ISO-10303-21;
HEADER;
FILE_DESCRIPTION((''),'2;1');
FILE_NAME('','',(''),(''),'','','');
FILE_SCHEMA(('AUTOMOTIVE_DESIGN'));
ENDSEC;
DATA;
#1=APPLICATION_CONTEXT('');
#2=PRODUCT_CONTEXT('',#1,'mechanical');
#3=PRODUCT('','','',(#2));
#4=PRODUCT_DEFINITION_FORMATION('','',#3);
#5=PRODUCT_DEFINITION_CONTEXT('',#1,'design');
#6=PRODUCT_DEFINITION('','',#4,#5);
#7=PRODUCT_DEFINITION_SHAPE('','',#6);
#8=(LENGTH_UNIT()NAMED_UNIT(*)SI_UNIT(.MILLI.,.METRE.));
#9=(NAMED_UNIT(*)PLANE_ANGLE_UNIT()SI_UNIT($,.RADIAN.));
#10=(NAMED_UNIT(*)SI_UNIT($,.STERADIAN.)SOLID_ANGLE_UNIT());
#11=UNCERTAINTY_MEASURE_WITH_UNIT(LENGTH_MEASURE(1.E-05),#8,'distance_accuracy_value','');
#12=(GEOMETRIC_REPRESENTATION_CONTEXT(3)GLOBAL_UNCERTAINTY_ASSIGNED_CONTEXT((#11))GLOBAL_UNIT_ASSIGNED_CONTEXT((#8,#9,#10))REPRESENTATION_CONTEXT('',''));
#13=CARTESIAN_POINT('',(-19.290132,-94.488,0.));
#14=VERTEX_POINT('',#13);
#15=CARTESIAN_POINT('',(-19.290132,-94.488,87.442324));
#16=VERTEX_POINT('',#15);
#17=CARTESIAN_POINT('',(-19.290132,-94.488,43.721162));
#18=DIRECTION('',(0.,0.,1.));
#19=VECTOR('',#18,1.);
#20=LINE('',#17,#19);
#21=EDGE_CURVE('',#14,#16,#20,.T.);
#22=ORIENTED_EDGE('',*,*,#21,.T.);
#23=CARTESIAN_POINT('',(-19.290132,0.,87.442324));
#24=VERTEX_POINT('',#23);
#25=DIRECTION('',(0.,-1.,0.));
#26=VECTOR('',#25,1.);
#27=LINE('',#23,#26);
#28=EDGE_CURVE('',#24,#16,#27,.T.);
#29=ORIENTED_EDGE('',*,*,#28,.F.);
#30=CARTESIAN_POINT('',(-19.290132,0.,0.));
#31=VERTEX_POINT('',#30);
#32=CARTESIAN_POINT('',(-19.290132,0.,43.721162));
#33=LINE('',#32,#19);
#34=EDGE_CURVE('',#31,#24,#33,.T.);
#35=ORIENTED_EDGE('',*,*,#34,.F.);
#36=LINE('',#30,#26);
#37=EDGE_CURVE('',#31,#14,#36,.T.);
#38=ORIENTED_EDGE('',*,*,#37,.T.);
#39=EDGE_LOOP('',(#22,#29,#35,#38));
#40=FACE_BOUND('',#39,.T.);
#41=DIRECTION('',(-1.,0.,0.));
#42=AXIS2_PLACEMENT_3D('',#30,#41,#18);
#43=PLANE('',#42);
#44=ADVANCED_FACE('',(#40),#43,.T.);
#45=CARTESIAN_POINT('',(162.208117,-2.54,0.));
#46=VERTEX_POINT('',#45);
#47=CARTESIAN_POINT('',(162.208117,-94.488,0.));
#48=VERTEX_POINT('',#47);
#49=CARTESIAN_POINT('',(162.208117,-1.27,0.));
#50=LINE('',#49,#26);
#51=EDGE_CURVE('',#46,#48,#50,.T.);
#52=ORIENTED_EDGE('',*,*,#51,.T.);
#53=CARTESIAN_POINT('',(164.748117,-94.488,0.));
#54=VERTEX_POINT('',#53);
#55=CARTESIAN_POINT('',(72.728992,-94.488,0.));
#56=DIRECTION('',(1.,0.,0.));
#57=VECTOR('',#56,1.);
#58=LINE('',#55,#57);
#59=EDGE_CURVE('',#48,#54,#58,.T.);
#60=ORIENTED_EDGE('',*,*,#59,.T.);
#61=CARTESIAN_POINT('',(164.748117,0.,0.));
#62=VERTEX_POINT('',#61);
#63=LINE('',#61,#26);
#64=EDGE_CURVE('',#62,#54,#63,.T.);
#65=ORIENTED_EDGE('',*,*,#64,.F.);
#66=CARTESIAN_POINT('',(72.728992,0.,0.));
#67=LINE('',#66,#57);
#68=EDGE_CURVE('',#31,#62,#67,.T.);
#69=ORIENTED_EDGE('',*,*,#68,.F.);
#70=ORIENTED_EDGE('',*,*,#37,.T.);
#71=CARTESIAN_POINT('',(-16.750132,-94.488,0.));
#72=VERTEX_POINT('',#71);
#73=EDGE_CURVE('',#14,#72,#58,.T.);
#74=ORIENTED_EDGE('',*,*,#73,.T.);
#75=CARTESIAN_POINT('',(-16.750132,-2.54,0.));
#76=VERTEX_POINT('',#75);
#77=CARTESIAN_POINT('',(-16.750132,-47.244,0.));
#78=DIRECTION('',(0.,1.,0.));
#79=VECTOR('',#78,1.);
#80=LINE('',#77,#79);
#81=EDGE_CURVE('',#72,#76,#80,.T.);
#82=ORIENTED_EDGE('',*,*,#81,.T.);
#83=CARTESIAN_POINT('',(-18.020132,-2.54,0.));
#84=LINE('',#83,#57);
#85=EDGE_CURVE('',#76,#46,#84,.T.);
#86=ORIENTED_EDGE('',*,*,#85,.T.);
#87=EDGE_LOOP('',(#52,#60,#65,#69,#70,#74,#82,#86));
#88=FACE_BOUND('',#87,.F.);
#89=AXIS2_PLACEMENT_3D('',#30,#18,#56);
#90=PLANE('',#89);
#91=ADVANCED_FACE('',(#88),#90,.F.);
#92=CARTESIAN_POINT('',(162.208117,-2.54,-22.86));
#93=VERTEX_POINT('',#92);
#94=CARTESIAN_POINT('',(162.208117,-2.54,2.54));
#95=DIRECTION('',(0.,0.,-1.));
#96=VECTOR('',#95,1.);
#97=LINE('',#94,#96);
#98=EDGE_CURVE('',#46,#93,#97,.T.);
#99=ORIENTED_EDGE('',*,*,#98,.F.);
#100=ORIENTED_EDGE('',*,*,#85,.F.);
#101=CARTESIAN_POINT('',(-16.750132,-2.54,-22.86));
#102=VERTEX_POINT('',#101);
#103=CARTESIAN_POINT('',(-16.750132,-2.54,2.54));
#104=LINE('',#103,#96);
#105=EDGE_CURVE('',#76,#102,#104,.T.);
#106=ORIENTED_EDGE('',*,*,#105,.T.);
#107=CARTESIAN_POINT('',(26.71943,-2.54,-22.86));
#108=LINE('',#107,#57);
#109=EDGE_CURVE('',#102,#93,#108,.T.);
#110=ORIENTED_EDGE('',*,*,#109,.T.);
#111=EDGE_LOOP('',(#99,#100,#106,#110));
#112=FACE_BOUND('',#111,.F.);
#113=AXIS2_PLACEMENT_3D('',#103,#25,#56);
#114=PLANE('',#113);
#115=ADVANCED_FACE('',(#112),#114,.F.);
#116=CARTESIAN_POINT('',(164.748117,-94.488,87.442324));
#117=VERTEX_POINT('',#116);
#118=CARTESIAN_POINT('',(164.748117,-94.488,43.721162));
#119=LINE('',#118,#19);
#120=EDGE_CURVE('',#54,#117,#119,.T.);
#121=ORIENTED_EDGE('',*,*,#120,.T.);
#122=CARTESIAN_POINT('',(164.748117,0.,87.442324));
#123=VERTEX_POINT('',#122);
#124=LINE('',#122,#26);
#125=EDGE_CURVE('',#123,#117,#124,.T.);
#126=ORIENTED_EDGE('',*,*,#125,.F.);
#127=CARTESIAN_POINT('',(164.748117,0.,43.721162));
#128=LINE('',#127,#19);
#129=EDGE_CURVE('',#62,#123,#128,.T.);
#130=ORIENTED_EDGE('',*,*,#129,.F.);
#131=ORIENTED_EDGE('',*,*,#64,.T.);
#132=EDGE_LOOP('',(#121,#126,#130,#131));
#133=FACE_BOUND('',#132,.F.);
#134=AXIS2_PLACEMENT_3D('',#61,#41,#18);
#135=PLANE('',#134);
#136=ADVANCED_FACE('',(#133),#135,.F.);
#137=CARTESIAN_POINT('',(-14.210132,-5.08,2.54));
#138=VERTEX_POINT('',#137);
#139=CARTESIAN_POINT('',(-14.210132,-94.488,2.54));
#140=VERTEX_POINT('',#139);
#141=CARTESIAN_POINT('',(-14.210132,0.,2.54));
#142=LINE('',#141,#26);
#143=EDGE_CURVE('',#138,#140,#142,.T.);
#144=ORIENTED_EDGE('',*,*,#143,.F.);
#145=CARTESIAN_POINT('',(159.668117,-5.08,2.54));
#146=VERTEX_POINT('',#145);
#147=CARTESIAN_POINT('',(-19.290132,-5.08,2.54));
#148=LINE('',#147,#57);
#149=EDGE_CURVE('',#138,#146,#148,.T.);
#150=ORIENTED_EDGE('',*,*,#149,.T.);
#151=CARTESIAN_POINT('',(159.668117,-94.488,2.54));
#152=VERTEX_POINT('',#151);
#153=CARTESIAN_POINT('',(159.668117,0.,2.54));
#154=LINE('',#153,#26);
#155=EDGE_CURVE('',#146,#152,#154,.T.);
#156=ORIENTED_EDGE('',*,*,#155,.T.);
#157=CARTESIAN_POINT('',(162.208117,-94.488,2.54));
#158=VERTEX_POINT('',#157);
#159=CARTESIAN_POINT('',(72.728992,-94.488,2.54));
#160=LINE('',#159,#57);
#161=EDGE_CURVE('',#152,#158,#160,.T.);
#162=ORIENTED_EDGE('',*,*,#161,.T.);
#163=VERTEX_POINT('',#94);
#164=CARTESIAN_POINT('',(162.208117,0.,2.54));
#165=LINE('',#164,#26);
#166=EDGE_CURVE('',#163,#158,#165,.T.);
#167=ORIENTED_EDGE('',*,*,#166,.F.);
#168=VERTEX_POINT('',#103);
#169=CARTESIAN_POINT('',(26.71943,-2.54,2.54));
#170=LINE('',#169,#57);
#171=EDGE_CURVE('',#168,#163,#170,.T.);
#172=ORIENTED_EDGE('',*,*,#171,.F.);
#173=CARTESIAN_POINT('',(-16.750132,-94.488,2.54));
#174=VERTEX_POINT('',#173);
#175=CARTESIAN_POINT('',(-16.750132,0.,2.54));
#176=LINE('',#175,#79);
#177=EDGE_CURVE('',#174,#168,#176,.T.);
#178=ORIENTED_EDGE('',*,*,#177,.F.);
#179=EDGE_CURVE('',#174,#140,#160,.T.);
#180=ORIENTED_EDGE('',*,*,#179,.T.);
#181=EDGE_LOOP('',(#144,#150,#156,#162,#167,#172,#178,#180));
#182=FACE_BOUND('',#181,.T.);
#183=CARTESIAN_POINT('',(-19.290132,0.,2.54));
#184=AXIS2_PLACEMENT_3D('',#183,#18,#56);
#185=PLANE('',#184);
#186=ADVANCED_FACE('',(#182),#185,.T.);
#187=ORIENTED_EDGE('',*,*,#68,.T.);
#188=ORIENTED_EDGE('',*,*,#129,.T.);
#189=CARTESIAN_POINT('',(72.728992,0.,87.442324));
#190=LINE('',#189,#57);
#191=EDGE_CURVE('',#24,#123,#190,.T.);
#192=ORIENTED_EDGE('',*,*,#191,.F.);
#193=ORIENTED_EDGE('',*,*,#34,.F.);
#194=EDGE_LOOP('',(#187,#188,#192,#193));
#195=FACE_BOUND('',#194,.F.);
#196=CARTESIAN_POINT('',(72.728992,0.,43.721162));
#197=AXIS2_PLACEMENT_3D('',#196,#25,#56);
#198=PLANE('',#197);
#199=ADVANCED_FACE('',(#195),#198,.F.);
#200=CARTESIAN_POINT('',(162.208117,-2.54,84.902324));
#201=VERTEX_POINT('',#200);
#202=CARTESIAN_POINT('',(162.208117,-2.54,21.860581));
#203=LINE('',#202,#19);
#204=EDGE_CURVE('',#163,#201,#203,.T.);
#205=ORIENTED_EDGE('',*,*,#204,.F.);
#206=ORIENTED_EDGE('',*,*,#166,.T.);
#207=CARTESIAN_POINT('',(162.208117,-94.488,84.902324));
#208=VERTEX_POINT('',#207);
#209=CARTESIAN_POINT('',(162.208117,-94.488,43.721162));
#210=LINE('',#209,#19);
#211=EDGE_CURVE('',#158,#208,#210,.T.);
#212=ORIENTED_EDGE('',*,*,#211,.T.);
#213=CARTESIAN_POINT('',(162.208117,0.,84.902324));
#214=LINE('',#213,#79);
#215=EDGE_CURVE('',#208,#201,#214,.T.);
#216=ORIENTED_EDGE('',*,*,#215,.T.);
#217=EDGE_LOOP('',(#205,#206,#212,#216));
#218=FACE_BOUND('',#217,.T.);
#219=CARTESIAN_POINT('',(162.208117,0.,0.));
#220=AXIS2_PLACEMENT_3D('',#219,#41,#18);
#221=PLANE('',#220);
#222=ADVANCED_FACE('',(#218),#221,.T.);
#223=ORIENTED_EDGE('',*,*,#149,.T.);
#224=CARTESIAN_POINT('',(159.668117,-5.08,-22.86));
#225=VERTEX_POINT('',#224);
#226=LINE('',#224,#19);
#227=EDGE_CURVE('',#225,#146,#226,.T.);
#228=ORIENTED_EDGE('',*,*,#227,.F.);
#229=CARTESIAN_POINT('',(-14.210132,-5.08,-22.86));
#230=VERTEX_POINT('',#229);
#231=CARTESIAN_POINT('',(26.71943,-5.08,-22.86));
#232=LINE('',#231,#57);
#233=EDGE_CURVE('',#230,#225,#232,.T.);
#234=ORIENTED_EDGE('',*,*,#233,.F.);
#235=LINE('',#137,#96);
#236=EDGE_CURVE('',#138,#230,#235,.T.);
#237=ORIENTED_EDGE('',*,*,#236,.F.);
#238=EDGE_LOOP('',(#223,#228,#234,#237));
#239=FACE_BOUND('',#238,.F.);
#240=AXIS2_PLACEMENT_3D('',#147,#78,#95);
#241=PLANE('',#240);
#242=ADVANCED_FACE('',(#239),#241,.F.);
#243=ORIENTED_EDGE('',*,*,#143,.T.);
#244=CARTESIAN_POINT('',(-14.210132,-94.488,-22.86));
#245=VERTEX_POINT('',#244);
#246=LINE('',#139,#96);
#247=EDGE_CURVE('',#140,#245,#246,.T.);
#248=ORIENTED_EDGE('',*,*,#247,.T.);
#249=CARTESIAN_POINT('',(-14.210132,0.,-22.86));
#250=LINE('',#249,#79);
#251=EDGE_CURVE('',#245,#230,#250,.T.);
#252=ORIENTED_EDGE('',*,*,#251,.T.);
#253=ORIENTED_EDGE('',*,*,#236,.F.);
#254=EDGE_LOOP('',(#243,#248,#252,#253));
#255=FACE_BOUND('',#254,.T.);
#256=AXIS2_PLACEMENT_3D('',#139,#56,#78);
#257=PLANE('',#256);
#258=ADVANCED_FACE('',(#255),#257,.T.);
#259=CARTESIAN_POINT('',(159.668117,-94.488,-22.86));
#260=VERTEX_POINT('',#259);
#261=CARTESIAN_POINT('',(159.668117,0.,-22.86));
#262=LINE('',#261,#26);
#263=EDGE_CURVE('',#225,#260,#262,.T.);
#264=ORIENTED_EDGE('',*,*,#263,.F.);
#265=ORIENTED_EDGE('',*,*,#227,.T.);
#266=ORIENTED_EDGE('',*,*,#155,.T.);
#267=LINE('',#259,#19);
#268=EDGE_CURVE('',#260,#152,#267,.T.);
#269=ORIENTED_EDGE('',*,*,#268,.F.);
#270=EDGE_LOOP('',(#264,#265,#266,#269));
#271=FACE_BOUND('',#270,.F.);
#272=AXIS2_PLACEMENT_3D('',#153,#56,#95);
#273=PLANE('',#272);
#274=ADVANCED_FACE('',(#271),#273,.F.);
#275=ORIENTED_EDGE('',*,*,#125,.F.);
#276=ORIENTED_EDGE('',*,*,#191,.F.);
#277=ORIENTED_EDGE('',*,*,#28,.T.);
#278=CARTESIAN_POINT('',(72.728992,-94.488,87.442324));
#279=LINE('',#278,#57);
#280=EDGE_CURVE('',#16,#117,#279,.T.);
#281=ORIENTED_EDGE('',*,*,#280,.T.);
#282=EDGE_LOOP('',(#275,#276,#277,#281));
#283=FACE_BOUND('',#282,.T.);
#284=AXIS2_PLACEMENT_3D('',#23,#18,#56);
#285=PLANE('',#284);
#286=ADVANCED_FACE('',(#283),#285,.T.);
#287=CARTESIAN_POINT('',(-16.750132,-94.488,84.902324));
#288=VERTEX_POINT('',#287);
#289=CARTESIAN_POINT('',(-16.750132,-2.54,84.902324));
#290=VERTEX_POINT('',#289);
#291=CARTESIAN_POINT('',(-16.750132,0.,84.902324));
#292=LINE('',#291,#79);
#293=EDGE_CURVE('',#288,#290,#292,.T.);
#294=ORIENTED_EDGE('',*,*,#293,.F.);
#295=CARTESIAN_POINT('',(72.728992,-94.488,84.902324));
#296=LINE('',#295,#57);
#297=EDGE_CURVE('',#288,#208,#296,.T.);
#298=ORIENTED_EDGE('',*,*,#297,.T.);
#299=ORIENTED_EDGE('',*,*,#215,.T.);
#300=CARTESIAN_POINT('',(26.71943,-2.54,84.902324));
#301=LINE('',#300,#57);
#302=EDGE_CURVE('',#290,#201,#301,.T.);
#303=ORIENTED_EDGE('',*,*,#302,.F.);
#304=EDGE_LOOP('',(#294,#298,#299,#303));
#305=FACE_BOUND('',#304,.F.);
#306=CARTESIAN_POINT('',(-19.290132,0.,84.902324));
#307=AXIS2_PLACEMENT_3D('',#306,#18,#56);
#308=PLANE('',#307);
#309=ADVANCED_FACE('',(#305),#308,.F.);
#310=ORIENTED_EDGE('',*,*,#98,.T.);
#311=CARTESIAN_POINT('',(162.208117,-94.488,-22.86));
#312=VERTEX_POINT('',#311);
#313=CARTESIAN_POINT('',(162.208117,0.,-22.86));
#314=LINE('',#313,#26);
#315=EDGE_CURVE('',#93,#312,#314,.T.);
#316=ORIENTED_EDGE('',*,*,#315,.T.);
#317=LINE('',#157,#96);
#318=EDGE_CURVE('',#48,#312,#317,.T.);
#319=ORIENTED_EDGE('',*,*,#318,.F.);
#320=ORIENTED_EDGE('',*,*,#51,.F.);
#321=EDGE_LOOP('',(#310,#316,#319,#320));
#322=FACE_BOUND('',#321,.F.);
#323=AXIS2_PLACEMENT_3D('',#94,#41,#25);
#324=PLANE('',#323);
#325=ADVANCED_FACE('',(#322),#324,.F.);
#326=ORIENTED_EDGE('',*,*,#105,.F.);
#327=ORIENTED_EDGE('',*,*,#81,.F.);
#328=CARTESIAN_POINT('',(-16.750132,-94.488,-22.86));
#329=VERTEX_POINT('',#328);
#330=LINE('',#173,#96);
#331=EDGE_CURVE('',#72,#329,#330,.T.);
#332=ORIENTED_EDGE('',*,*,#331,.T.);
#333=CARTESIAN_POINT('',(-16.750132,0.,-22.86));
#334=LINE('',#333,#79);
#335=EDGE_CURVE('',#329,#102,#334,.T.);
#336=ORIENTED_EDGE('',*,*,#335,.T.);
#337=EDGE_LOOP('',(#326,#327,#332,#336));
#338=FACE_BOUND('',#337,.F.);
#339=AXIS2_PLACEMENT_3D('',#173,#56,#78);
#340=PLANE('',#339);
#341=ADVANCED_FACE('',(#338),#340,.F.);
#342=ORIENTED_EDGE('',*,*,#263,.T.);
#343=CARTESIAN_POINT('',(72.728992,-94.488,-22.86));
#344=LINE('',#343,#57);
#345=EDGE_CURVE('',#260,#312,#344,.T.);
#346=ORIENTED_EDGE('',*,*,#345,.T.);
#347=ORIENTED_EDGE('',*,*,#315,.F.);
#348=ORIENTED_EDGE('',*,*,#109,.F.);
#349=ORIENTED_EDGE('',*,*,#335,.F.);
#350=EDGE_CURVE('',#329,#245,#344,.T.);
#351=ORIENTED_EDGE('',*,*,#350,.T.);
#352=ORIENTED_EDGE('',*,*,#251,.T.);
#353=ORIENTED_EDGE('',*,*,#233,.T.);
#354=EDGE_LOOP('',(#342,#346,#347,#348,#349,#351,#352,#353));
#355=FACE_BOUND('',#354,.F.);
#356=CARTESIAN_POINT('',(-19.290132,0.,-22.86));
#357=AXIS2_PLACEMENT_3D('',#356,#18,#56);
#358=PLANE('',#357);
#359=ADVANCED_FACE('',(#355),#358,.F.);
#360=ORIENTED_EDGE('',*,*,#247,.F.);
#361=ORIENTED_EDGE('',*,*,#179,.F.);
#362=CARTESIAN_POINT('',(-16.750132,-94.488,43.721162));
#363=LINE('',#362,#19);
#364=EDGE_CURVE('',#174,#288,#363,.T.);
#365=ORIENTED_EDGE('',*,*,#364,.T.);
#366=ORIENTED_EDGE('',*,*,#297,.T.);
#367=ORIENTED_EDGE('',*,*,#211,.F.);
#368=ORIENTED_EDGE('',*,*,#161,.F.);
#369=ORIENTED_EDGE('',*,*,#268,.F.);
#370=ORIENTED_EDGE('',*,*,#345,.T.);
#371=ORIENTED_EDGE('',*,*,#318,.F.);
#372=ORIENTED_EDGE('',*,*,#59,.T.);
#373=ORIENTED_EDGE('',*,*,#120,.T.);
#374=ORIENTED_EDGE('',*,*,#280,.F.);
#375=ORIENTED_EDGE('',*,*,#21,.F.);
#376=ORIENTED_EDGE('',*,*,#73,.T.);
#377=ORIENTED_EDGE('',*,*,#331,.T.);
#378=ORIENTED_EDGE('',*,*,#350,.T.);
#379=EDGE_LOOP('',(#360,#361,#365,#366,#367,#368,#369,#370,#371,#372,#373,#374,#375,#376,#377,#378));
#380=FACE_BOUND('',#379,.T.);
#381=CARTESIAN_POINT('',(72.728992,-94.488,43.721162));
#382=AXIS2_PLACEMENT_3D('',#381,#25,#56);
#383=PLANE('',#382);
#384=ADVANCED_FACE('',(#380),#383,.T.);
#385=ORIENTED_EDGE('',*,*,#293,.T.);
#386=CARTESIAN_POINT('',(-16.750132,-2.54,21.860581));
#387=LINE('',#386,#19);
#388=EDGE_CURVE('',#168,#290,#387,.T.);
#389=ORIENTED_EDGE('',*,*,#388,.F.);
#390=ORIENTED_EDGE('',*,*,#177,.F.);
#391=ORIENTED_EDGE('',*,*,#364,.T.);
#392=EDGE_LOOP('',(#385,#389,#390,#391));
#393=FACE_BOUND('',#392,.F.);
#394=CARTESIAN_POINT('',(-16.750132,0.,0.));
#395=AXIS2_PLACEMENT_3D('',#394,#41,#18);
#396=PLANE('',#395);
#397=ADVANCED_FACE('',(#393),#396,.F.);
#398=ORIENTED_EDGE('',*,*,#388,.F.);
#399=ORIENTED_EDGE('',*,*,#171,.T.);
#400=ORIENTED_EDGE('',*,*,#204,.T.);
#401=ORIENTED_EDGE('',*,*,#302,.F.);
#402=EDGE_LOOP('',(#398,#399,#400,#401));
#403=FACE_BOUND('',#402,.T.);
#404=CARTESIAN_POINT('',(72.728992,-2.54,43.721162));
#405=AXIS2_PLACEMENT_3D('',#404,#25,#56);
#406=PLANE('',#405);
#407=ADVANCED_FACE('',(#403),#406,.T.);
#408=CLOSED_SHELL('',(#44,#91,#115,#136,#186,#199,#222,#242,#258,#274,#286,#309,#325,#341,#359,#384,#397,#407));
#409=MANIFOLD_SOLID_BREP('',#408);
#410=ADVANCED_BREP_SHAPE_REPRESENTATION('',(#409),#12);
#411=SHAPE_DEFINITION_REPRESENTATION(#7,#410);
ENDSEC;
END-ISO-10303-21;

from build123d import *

# Parameters (mm, degrees)
F0_W        = 184.0382497758
F0_H        = 87.4423235655
F1_DEPTH    = 94.488
F2_T        = -2.54
F3_DEPTH    = 25.4
F4_T        = 2.54
F4_T3_DEPTH = 97.028
F4_T5_DEPTH = 184.0382497758
F4_T7_DEPTH = 87.4423235655


# Not quite as in the source:
# - a shell that OpenCascade refuses in one call is made with other operations: the cavity is built on its own and cut out


with BuildPart() as f1:
    # F0 (on Front) → F1 (new body)
    with BuildSketch(Plane.XZ):
        with Locations((72.7289924398, 43.7211617827)):
            Rectangle(F0_W, F0_H)
    extrude(amount=F1_DEPTH)

    # F2
    f2_openings = [f1.faces().sort_by_distance(p)[0] for p in [
        (72.728992, -94.488, 43.721162),
    ]]
    offset(amount=F2_T, openings=f2_openings)

    # F3 (add): a face of the model
    f3_faces = [f1.faces().sort_by_distance(p)[0] for p in [
        (72.7289924398, -48.514, 2.54),
    ]]
    extrude(f3_faces, amount=-F3_DEPTH)

    # F4: shell of thickness 2.54, made by hand


with BuildPart() as f4_core1:
    # F4_t2: copy of F1
    add(f1.part)

    # the walls: a layer under each face that stays
    f4_faces = [f4_core1.faces().sort_by_distance(p)[0] for p in [
        (-19.2901324481, -47.244, 43.7211617827),
        (72.7289924398, -47.244, 87.4423235655),
        (104.36056662, -2.333037037, 0),
        (72.7289924398, 0, 43.7211617827),
        (164.7481173277, -47.244, 43.7211617827),
        (162.2081173277, -48.514, -11.43),
        (72.7289924398, -2.54, -11.43),
        (-16.7501324481, -48.514, -11.43),
        (162.2081173277, -48.514, 43.7211617827),
        (72.7289924398, -48.514, 84.9023235655),
        (-16.7501324481, -48.514, 43.7211617827),
        (72.7289924398, -2.54, 43.7211617827),
    ]]
    thicken(f4_faces, amount=-F4_T, mode=Mode.SUBTRACT)

    # F4_s4 → F4_t3 (cut)
    with BuildSketch(Plane.XZ):
        Polygon((162.2335173277, -0.0254), (162.2081173277, 2.54), (159.6681173277, 2.54), (159.6681173277, 0), align=None)
        Polygon((-16.7755324481, -0.0254), (-16.7501324481, 2.54), (-14.2101324481, 2.54), (-14.2101324481, 0), align=None)
        Polygon((162.1827173277, 84.8769235655), (164.7481173277, 84.9023235655), (164.7481173277, 87.4423235655), (162.2081173277, 87.4423235655), align=None)
        Polygon((-16.7247324481, 84.8769235655), (-16.7501324481, 87.4423235655), (-19.2901324481, 87.4423235655), (-19.2901324481, 84.9023235655), align=None)
    extrude(amount=F4_T3_DEPTH, mode=Mode.SUBTRACT)

    # F4_s6 → F4_t5 (cut)
    with BuildSketch(Plane.YZ.offset(-19.2901324481)):
        Polygon((-2.5146, -0.0254), (-2.54, 2.54), (-5.08, 2.54), (-5.08, 0), align=None)
        Polygon((-2.5654, 84.8769235655), (-2.54, 87.4423235655), (0, 87.4423235655), (0, 84.9023235655), align=None)
    extrude(amount=F4_T5_DEPTH, mode=Mode.SUBTRACT)

    # F4_s8 → F4_t7 (cut)
    with BuildSketch(Plane.XY):
        Polygon((162.1827173277, -2.5654), (164.7481173277, -2.54), (164.7481173277, 0), (162.2081173277, 0), align=None)
        Polygon((-16.7247324481, -2.5654), (-19.2901324481, -2.54), (-19.2901324481, 0), (-16.7501324481, 0), align=None)
    extrude(amount=F4_T7_DEPTH, mode=Mode.SUBTRACT)


with BuildPart() as f1_1:
    add(f1.part)

    # what is left inside the walls is the cavity
    f4_cavity = [f4_core1.part.solids().sort_by_distance(p)[0] for p in [
        (72.728992, -64.685333, 2.5146),
    ]]
    add(f4_cavity, mode=Mode.SUBTRACT)


solid = f1_1.part
